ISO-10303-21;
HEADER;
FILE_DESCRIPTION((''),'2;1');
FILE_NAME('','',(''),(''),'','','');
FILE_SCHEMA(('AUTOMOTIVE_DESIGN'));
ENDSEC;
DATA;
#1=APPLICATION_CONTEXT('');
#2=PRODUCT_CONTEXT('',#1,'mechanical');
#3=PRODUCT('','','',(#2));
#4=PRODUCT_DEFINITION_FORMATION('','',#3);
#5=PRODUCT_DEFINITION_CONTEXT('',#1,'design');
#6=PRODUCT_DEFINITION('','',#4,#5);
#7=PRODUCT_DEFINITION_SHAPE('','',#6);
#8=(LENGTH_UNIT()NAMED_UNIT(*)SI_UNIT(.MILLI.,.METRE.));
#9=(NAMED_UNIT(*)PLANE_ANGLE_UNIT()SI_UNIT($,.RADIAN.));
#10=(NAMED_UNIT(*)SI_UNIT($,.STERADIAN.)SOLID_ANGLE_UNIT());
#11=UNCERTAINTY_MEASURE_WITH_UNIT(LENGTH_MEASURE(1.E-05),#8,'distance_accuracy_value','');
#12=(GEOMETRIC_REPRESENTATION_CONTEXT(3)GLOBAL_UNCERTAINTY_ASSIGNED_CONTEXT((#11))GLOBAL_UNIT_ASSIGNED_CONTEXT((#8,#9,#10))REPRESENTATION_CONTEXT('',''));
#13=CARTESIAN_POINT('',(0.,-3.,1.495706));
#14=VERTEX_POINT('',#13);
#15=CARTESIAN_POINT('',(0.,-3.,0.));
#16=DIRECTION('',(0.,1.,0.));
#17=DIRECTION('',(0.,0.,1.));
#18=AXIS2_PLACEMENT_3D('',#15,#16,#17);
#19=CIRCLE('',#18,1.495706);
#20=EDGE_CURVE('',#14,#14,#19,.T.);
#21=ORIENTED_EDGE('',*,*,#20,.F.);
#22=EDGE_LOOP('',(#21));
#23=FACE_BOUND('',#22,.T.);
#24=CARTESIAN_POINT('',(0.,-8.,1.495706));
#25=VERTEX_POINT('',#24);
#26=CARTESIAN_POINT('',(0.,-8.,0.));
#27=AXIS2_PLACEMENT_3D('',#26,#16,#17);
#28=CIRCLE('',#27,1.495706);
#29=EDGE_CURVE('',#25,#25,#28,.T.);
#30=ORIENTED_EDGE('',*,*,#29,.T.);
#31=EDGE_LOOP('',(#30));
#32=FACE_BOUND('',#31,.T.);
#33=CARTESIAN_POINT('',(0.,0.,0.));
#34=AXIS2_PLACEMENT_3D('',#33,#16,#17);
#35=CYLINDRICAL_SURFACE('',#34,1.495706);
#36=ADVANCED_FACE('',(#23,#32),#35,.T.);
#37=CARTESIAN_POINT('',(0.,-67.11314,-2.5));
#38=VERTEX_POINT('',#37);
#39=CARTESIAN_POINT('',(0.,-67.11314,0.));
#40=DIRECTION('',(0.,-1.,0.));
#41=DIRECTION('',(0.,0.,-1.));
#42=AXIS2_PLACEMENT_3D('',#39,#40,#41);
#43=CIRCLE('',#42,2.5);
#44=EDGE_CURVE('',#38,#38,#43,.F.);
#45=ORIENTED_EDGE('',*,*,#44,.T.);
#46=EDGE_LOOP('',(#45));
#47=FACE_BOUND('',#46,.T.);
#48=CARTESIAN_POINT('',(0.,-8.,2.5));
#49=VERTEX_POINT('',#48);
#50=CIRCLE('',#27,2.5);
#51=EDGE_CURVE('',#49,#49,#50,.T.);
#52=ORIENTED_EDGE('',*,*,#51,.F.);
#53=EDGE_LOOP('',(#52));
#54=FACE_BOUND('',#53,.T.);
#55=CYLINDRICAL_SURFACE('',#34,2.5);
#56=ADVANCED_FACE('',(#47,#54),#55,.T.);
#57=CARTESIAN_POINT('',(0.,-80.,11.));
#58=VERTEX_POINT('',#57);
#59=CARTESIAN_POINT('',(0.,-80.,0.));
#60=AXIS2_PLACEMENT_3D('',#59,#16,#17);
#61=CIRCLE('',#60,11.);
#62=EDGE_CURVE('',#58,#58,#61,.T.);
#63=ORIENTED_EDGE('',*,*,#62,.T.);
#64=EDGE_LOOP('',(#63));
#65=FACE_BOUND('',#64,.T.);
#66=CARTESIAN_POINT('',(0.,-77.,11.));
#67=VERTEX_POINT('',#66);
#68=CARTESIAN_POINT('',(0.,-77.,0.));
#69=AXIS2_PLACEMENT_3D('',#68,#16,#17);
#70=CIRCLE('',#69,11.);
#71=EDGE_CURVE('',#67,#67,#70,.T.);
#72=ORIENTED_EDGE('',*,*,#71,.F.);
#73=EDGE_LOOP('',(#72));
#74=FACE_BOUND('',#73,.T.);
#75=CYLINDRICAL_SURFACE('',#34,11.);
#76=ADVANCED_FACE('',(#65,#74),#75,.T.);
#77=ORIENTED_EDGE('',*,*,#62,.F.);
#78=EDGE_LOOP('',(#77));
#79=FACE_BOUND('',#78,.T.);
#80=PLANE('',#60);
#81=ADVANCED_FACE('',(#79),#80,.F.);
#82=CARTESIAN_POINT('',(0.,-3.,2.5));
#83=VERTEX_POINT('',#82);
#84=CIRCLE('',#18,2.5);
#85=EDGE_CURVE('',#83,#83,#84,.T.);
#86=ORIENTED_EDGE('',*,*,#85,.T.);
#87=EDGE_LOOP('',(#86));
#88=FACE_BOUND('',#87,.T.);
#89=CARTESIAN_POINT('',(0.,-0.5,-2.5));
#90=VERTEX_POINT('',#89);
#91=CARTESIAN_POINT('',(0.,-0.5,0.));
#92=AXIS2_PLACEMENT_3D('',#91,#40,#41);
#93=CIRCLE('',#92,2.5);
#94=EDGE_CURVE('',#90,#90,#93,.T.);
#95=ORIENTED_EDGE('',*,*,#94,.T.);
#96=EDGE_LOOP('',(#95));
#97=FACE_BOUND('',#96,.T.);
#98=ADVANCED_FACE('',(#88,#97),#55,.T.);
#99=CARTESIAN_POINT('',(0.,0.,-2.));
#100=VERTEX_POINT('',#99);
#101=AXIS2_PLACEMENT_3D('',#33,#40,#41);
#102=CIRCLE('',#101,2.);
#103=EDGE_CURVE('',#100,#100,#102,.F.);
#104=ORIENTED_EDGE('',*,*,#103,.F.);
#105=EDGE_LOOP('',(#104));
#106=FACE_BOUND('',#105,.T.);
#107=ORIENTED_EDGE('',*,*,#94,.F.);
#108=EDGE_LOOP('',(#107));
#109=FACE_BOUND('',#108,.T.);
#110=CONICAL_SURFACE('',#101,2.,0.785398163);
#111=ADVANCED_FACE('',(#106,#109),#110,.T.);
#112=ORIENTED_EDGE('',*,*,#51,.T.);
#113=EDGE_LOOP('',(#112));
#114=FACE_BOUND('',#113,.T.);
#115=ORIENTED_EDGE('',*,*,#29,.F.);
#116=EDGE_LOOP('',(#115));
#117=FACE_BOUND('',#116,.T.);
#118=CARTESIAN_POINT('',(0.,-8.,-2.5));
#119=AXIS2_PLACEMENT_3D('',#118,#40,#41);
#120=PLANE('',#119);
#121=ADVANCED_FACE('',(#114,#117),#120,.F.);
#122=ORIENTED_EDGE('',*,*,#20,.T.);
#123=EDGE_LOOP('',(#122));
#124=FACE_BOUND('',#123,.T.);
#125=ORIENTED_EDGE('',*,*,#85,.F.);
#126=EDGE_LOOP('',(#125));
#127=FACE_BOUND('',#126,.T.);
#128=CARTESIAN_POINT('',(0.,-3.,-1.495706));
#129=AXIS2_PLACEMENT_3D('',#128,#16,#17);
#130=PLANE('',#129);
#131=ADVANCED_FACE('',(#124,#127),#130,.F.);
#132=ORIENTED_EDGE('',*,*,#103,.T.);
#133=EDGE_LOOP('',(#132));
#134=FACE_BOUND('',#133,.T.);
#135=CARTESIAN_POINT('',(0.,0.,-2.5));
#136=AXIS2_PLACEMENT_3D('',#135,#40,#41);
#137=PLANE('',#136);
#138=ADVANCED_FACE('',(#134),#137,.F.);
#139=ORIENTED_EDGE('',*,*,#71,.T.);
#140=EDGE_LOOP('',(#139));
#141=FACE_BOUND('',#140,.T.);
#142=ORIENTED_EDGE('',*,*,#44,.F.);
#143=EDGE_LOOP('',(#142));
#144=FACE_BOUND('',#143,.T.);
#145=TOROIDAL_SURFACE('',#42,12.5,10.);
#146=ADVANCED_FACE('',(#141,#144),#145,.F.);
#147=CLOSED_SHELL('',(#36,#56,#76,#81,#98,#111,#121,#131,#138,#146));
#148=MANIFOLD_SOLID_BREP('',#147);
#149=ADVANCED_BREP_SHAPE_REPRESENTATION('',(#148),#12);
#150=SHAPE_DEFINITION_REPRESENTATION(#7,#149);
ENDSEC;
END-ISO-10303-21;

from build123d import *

# Parameters (mm, degrees)
CHAMFER1_SIZE = 0.5
FILLET1_R     = 10


with BuildPart() as part:
    # Sketch1 → Revolve1 (revolve)
    with BuildSketch(Plane(origin=(0, 0, 0), x_dir=(0, 0, -1), z_dir=(1, 0, 0)), mode=Mode.PRIVATE) as revolve1_sk:
        Polygon((0, 0), (0, -80), (11.00000000000001, -80), (11.00000000000001, -77), (2.5000000000000098, -77), (2.5000000000000098, -8), (1.4957064412197685, -8), (1.4957064412197685, -3.000000000000001), (2.500000000000019, -3.000000000000001), (2.500000000000019, -4e-16), align=None)
    revolve(revolve1_sk.sketch.rotate(Axis((0, 0, 0), (0, -1, 0)), 180), axis=Axis((0, 0, 0), (0, -1, 0)))

    # Chamfer1
    chamfer1_edges = [part.edges().sort_by_distance(p)[0] for p in [
        (-6.1e-16, -4e-16, -2.500000000000019),
    ]]
    chamfer(chamfer1_edges, length=CHAMFER1_SIZE)

    # Fillet1
    # the kernel refuses this fillet: 10 mm, written as the material it adds along each edge
    with BuildSketch(Plane(origin=(0, -77, 0), x_dir=(1.2e-16, 0, 1), z_dir=(1, 0, -1.2e-16))) as fillet1_piece_1:
        with BuildLine():
            CenterArc((12.500000000000007, -9.886859966642888), FILLET1_R, 98.62692655867836, 81.37307344132165)
            Line((11.000000000000053, -2.8422e-13), (10.970000000000054, 0.19773719933256473))
            ThreePointArc((10.970000000000054, 0.19773719933256473), (6.750000000000032, 0.20000000000000284), (2.5000000000000098, 0.20000000000000284))
            Line((2.5000000000000098, 0.20000000000000284), (2.3000000000000096, 0))
            Line((2.3000000000000096, 0), (2.300000000000007, -9.886859966642888))
            Line((2.300000000000007, -9.886859966642888), (2.500000000000007, -9.886859966642888))
        make_face()
    revolve(axis=Axis((0, -77, 0), (0, -1, 0)))


solid = part.part
